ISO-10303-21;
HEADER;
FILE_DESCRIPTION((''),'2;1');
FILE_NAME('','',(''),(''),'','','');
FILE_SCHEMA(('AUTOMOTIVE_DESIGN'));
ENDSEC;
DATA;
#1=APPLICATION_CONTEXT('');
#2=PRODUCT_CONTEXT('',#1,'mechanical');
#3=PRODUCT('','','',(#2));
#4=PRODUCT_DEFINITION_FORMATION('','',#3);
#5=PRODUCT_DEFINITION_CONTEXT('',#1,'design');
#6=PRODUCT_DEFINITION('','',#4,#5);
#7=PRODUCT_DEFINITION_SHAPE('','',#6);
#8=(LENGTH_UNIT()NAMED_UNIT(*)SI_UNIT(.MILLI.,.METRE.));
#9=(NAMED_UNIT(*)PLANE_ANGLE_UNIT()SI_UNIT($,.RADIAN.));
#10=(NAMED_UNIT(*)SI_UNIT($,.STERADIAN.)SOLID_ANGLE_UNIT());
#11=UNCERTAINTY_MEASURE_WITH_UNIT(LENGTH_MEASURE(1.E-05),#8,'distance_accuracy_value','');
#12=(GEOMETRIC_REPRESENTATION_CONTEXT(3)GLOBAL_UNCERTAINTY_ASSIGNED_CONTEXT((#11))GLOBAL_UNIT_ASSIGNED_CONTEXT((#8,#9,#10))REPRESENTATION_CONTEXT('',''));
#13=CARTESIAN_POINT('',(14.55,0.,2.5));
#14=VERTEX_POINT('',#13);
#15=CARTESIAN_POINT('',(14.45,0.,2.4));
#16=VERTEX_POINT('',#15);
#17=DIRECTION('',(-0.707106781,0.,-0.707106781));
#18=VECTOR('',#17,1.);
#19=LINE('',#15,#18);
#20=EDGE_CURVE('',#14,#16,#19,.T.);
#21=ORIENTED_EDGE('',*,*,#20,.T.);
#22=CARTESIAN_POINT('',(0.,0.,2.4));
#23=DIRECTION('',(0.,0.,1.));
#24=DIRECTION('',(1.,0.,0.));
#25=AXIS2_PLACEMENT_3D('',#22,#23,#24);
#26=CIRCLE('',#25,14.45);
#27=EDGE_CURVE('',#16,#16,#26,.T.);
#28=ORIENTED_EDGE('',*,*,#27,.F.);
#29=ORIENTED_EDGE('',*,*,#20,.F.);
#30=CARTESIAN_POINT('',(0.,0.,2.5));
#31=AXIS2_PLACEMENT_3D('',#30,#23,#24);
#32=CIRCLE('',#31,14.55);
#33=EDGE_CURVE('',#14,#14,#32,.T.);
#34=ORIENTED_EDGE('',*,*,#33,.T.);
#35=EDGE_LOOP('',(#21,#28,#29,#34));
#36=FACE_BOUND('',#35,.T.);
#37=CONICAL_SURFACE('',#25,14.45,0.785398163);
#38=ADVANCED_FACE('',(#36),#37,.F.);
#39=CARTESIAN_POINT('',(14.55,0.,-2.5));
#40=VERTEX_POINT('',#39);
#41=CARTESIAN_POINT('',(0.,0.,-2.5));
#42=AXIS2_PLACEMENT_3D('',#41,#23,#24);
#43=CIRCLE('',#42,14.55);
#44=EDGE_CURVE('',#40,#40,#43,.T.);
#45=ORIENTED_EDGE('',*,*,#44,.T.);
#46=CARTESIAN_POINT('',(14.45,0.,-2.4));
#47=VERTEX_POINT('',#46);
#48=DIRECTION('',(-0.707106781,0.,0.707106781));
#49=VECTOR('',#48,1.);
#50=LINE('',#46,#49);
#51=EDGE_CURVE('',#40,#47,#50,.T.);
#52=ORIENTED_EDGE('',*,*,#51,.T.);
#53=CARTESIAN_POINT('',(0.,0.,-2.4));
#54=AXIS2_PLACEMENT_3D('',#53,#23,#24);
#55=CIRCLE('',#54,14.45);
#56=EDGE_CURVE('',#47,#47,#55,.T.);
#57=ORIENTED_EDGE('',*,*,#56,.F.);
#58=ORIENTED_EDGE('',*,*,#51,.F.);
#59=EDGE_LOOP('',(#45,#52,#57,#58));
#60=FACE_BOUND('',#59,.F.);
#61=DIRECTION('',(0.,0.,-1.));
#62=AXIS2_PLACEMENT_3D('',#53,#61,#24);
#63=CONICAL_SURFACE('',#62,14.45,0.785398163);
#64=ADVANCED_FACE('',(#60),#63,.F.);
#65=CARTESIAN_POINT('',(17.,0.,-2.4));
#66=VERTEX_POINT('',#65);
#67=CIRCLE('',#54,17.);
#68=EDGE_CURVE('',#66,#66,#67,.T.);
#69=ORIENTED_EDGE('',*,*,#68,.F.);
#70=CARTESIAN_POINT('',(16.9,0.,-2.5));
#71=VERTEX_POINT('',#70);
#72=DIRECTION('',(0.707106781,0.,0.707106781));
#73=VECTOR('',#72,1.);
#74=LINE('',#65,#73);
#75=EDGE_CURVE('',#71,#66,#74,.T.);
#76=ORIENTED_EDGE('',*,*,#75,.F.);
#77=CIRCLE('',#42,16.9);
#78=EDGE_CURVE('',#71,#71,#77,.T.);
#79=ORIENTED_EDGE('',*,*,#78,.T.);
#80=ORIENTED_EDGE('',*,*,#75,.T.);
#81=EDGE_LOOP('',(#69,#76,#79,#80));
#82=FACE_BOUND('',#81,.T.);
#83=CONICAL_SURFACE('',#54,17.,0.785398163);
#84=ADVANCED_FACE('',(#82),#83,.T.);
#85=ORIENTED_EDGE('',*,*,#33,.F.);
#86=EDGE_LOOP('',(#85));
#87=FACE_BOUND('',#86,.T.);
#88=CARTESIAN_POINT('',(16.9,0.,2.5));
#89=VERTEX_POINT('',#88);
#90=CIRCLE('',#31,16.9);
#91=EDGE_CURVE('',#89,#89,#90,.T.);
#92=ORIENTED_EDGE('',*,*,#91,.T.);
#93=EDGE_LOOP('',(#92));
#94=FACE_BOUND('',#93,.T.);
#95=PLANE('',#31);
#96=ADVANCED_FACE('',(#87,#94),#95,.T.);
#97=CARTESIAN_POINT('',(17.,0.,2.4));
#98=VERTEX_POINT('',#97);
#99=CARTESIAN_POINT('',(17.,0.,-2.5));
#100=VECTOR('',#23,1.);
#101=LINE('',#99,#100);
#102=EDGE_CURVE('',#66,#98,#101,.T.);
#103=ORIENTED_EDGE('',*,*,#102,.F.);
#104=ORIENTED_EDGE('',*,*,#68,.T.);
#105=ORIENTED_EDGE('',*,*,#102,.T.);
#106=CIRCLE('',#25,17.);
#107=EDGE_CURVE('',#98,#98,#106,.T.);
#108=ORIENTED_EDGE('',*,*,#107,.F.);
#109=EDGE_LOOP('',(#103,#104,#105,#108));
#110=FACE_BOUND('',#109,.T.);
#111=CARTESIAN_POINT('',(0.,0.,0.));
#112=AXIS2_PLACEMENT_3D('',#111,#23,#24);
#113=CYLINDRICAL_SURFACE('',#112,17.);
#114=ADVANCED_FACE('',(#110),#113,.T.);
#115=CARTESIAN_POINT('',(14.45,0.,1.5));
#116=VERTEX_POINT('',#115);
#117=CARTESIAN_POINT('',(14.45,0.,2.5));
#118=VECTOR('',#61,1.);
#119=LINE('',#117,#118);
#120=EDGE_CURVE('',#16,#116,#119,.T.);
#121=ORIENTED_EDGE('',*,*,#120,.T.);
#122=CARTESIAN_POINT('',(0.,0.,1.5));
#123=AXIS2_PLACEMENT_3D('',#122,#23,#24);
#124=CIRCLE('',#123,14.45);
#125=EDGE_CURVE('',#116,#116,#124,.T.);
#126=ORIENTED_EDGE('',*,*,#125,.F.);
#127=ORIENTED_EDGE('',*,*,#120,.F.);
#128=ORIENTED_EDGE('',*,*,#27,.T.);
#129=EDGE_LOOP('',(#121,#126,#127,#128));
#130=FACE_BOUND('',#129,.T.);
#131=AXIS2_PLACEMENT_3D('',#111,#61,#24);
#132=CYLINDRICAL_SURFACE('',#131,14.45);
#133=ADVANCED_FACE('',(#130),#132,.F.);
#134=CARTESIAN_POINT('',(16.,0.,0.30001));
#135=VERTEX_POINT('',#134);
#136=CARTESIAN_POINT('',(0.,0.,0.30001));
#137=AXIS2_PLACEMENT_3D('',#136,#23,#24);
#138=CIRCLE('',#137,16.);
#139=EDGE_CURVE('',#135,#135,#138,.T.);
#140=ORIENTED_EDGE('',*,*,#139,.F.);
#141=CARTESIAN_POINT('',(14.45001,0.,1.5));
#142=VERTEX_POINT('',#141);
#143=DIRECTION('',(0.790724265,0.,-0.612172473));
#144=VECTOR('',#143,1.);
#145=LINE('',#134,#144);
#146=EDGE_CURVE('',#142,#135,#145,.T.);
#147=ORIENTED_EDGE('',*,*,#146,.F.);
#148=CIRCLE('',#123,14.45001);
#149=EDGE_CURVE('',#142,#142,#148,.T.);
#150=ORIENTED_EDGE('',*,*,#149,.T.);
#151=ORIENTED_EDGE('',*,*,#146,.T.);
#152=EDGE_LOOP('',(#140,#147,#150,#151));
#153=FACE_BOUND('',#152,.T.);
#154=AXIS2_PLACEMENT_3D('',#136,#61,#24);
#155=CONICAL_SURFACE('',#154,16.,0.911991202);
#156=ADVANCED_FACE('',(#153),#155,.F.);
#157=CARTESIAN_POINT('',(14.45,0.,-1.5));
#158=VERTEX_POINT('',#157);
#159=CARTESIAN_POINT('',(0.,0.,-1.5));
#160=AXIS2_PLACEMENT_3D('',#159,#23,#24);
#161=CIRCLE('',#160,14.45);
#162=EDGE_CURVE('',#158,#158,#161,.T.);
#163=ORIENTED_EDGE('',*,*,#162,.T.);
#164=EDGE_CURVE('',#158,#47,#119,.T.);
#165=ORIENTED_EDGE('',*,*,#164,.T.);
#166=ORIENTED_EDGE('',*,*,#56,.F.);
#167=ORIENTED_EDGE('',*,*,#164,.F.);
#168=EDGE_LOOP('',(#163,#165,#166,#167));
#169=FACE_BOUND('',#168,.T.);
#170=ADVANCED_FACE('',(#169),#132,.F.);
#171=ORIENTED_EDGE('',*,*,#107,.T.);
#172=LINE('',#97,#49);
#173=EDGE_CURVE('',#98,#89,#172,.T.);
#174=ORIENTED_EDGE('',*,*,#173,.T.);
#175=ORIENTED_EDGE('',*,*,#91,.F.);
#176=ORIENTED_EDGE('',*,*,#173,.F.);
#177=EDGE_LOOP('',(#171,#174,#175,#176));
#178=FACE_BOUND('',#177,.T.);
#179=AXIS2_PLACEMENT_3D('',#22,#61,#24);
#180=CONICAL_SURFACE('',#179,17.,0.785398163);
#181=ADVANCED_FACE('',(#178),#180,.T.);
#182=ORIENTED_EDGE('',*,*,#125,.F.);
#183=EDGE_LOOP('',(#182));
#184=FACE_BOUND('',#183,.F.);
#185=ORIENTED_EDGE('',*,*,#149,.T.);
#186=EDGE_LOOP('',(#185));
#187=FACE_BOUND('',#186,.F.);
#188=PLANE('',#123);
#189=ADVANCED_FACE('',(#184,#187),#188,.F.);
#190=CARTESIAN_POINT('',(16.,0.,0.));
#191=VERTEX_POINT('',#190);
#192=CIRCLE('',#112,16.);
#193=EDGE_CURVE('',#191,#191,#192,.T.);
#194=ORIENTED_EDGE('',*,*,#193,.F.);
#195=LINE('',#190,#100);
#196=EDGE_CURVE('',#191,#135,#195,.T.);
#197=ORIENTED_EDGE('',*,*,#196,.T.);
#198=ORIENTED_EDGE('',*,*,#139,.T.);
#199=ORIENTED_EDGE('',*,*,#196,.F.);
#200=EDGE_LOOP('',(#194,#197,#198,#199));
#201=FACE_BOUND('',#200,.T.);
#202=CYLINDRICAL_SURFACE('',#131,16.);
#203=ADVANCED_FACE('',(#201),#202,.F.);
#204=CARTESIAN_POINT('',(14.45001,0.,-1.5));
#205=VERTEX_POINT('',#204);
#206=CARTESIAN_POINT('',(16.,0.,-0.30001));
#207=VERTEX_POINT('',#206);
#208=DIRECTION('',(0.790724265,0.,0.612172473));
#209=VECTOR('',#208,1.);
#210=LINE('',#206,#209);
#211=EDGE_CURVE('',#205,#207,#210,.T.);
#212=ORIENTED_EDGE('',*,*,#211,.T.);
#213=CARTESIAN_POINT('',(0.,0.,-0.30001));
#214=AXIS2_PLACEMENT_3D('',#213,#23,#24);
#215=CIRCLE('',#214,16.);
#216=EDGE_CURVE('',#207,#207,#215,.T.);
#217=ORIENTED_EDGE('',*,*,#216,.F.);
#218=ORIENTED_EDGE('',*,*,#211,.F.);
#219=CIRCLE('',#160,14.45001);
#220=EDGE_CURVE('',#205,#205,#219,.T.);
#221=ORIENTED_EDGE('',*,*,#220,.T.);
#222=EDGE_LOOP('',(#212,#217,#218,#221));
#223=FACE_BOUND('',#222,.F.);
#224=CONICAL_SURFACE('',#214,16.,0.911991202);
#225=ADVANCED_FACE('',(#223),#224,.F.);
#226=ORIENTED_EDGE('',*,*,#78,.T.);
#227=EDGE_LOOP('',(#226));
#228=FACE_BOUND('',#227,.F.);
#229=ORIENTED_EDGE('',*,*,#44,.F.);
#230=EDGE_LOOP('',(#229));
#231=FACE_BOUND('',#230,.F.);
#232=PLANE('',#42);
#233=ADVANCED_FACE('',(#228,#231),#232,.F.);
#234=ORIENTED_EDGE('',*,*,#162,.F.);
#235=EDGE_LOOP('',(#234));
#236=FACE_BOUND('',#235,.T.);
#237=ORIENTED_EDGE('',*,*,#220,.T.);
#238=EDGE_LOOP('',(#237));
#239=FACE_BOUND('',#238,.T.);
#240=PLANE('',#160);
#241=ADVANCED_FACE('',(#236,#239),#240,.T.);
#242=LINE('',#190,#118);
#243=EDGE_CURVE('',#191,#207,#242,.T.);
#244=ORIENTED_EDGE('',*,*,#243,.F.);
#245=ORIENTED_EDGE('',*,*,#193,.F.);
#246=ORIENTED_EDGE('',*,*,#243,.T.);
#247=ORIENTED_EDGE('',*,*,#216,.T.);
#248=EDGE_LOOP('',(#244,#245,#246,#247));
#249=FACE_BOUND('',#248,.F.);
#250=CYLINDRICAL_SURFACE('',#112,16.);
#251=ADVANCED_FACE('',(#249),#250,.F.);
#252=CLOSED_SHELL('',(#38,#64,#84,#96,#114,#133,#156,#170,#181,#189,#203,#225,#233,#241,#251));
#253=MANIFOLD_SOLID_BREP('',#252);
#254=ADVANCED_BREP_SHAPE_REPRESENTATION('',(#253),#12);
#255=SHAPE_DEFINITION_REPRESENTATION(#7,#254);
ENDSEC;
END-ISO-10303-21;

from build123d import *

# Parameters (mm, degrees)
F0_R          = 17
F0_R_2        = 16
F0_R_3        = 14.45
F1_DEPTH      = 2.5
F2_DEPTH      = 1.5
F2_DEPTH_BACK = 1.5
F3_SIZE2      = 1.19999
F3_SIZE       = 1.54999
F4_SIZE       = 0.1
F6_SIZE       = 0.1


# Not quite as in the source:
# - a fillet or chamfer is up to 0.001 mm smaller than in the source, because OpenCascade refuses the exact size


with BuildPart() as f1:
    # F0 (on Top) → F1 (new body, symmetric)
    with BuildSketch(Plane.XY):
        Circle(F0_R)
        Circle(F0_R_2, mode=Mode.SUBTRACT)
        Circle(F0_R_2)
        Circle(F0_R_3, mode=Mode.SUBTRACT)
    extrude(amount=F1_DEPTH, both=True)

    # F0 (on Top) → F2 (cut, two sides)
    with BuildSketch(Plane.XY) as f2_sk:
        Circle(F0_R_2)
        Circle(F0_R_3, mode=Mode.SUBTRACT)
    extrude(amount=F2_DEPTH, mode=Mode.SUBTRACT)
    extrude(f2_sk.sketch, amount=-F2_DEPTH_BACK, mode=Mode.SUBTRACT)

    # F3 (size 1.55 and 1.2 in the source; OpenCascade refuses exactly that, so slightly less here)
    f3_edges = [f1.edges().sort_by_distance(p)[0] for p in [
        (-16, 0, -1.5),
        (-16, 0, 1.5),
    ]]
    chamfer(f3_edges, length=F3_SIZE, length2=F3_SIZE2)

    # F4
    f4_edges = [f1.edges().sort_by_distance(p)[0] for p in [
        (-17, 0, 2.5),
        (-17, 0, -2.5),
    ]]
    chamfer(f4_edges, length=F4_SIZE)

    # F6
    f6_edges = [f1.edges().sort_by_distance(p)[0] for p in [
        (-14.45, 0, 2.5),
        (-14.45, 0, -2.5),
    ]]
    chamfer(f6_edges, length=F6_SIZE)


solid = f1.part
